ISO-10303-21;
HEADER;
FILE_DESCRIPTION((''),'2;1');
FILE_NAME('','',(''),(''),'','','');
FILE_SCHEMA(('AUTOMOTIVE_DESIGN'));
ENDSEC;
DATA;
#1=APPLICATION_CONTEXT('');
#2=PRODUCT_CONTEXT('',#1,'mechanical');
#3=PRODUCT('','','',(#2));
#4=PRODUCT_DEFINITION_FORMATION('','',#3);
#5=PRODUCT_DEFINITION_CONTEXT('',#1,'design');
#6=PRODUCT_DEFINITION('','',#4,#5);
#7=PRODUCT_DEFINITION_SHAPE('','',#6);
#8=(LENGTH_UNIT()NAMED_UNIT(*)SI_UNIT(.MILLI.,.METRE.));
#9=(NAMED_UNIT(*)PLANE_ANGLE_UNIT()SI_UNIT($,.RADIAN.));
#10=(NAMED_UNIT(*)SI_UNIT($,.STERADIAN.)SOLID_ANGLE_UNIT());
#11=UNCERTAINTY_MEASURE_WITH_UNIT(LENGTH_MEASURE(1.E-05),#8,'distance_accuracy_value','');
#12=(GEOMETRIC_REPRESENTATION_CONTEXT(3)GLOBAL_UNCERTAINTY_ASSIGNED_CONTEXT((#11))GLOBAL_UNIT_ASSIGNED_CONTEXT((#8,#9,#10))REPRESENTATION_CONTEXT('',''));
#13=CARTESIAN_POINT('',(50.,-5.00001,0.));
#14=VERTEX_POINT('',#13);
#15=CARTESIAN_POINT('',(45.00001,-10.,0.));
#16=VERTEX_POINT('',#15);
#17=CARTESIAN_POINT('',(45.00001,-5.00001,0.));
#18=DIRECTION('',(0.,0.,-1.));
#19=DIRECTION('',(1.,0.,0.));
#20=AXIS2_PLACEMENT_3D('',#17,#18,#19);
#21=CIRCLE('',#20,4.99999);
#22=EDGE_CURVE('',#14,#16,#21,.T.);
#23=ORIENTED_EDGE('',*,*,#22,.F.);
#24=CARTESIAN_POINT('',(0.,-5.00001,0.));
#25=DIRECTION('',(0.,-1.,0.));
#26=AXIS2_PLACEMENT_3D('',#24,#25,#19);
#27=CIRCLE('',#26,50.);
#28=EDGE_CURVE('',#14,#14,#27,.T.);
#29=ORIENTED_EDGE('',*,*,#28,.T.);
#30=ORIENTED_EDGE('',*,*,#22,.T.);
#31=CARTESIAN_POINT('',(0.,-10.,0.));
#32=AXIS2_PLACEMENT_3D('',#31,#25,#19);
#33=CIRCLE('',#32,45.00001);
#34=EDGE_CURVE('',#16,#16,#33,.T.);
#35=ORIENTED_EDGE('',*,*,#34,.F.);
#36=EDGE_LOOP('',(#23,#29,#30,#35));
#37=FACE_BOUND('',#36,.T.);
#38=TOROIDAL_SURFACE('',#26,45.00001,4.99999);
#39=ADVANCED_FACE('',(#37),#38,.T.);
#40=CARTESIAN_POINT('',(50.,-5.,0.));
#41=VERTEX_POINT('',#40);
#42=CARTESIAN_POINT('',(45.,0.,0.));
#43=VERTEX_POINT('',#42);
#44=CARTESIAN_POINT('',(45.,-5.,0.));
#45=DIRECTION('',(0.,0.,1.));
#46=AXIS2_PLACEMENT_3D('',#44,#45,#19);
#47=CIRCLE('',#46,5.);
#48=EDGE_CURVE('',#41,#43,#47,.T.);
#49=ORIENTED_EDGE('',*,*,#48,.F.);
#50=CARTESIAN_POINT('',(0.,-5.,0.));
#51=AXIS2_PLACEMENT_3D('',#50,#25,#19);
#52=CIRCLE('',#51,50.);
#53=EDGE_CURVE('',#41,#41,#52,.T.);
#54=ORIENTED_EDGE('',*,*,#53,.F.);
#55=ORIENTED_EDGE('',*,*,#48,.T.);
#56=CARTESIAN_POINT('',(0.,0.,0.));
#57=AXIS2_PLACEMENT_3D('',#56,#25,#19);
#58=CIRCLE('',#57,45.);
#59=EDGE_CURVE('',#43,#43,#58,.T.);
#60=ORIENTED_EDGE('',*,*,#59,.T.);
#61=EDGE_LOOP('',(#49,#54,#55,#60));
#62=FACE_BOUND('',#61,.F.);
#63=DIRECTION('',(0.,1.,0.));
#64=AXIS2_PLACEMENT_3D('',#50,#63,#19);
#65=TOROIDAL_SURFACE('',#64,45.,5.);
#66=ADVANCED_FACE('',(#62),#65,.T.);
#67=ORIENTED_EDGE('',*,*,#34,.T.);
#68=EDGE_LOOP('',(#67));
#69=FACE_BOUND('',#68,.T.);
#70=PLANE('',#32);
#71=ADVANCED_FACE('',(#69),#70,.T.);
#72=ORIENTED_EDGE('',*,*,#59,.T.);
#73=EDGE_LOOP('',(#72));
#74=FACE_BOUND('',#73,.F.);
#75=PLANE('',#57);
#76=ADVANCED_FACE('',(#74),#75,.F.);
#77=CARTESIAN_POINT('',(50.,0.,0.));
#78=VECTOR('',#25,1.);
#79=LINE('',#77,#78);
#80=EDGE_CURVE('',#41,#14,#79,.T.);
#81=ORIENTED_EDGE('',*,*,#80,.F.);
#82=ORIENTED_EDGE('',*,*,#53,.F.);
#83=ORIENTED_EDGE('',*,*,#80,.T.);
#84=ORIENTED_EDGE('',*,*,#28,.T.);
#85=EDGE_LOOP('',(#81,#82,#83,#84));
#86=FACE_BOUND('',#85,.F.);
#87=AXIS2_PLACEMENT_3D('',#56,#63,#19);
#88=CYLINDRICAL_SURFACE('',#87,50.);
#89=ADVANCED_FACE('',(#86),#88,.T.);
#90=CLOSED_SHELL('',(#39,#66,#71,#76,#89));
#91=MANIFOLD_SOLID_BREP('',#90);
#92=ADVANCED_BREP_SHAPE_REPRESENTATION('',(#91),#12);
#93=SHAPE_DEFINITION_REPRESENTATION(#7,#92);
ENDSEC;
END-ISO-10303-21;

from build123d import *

# Parameters (mm, degrees)
F0_R     = 50
F1_DEPTH = 10
F2_R     = 5
F3_R     = 4.99999


# Not quite as in the source:
# - a fillet or chamfer is up to 0.001 mm smaller than in the source, because OpenCascade refuses the exact size


with BuildPart() as f1:
    # F0 (on Front) → F1 (new body)
    with BuildSketch(Plane.XZ):
        Circle(F0_R)
    extrude(amount=F1_DEPTH)

    # F2
    f2_edges = [f1.edges().sort_by_distance(p)[0] for p in [
        (-50, 0, 0),
    ]]
    fillet(f2_edges, radius=F2_R)

    # F3 (radius 5 in the source; OpenCascade refuses exactly that, so slightly less here)
    f3_edges = [f1.edges().sort_by_distance(p)[0] for p in [
        (-50, -10, 0),
        (50, -7.5, 0),
        (-50, -5, 0),
    ]]
    fillet(f3_edges, radius=F3_R)


solid = f1.part
